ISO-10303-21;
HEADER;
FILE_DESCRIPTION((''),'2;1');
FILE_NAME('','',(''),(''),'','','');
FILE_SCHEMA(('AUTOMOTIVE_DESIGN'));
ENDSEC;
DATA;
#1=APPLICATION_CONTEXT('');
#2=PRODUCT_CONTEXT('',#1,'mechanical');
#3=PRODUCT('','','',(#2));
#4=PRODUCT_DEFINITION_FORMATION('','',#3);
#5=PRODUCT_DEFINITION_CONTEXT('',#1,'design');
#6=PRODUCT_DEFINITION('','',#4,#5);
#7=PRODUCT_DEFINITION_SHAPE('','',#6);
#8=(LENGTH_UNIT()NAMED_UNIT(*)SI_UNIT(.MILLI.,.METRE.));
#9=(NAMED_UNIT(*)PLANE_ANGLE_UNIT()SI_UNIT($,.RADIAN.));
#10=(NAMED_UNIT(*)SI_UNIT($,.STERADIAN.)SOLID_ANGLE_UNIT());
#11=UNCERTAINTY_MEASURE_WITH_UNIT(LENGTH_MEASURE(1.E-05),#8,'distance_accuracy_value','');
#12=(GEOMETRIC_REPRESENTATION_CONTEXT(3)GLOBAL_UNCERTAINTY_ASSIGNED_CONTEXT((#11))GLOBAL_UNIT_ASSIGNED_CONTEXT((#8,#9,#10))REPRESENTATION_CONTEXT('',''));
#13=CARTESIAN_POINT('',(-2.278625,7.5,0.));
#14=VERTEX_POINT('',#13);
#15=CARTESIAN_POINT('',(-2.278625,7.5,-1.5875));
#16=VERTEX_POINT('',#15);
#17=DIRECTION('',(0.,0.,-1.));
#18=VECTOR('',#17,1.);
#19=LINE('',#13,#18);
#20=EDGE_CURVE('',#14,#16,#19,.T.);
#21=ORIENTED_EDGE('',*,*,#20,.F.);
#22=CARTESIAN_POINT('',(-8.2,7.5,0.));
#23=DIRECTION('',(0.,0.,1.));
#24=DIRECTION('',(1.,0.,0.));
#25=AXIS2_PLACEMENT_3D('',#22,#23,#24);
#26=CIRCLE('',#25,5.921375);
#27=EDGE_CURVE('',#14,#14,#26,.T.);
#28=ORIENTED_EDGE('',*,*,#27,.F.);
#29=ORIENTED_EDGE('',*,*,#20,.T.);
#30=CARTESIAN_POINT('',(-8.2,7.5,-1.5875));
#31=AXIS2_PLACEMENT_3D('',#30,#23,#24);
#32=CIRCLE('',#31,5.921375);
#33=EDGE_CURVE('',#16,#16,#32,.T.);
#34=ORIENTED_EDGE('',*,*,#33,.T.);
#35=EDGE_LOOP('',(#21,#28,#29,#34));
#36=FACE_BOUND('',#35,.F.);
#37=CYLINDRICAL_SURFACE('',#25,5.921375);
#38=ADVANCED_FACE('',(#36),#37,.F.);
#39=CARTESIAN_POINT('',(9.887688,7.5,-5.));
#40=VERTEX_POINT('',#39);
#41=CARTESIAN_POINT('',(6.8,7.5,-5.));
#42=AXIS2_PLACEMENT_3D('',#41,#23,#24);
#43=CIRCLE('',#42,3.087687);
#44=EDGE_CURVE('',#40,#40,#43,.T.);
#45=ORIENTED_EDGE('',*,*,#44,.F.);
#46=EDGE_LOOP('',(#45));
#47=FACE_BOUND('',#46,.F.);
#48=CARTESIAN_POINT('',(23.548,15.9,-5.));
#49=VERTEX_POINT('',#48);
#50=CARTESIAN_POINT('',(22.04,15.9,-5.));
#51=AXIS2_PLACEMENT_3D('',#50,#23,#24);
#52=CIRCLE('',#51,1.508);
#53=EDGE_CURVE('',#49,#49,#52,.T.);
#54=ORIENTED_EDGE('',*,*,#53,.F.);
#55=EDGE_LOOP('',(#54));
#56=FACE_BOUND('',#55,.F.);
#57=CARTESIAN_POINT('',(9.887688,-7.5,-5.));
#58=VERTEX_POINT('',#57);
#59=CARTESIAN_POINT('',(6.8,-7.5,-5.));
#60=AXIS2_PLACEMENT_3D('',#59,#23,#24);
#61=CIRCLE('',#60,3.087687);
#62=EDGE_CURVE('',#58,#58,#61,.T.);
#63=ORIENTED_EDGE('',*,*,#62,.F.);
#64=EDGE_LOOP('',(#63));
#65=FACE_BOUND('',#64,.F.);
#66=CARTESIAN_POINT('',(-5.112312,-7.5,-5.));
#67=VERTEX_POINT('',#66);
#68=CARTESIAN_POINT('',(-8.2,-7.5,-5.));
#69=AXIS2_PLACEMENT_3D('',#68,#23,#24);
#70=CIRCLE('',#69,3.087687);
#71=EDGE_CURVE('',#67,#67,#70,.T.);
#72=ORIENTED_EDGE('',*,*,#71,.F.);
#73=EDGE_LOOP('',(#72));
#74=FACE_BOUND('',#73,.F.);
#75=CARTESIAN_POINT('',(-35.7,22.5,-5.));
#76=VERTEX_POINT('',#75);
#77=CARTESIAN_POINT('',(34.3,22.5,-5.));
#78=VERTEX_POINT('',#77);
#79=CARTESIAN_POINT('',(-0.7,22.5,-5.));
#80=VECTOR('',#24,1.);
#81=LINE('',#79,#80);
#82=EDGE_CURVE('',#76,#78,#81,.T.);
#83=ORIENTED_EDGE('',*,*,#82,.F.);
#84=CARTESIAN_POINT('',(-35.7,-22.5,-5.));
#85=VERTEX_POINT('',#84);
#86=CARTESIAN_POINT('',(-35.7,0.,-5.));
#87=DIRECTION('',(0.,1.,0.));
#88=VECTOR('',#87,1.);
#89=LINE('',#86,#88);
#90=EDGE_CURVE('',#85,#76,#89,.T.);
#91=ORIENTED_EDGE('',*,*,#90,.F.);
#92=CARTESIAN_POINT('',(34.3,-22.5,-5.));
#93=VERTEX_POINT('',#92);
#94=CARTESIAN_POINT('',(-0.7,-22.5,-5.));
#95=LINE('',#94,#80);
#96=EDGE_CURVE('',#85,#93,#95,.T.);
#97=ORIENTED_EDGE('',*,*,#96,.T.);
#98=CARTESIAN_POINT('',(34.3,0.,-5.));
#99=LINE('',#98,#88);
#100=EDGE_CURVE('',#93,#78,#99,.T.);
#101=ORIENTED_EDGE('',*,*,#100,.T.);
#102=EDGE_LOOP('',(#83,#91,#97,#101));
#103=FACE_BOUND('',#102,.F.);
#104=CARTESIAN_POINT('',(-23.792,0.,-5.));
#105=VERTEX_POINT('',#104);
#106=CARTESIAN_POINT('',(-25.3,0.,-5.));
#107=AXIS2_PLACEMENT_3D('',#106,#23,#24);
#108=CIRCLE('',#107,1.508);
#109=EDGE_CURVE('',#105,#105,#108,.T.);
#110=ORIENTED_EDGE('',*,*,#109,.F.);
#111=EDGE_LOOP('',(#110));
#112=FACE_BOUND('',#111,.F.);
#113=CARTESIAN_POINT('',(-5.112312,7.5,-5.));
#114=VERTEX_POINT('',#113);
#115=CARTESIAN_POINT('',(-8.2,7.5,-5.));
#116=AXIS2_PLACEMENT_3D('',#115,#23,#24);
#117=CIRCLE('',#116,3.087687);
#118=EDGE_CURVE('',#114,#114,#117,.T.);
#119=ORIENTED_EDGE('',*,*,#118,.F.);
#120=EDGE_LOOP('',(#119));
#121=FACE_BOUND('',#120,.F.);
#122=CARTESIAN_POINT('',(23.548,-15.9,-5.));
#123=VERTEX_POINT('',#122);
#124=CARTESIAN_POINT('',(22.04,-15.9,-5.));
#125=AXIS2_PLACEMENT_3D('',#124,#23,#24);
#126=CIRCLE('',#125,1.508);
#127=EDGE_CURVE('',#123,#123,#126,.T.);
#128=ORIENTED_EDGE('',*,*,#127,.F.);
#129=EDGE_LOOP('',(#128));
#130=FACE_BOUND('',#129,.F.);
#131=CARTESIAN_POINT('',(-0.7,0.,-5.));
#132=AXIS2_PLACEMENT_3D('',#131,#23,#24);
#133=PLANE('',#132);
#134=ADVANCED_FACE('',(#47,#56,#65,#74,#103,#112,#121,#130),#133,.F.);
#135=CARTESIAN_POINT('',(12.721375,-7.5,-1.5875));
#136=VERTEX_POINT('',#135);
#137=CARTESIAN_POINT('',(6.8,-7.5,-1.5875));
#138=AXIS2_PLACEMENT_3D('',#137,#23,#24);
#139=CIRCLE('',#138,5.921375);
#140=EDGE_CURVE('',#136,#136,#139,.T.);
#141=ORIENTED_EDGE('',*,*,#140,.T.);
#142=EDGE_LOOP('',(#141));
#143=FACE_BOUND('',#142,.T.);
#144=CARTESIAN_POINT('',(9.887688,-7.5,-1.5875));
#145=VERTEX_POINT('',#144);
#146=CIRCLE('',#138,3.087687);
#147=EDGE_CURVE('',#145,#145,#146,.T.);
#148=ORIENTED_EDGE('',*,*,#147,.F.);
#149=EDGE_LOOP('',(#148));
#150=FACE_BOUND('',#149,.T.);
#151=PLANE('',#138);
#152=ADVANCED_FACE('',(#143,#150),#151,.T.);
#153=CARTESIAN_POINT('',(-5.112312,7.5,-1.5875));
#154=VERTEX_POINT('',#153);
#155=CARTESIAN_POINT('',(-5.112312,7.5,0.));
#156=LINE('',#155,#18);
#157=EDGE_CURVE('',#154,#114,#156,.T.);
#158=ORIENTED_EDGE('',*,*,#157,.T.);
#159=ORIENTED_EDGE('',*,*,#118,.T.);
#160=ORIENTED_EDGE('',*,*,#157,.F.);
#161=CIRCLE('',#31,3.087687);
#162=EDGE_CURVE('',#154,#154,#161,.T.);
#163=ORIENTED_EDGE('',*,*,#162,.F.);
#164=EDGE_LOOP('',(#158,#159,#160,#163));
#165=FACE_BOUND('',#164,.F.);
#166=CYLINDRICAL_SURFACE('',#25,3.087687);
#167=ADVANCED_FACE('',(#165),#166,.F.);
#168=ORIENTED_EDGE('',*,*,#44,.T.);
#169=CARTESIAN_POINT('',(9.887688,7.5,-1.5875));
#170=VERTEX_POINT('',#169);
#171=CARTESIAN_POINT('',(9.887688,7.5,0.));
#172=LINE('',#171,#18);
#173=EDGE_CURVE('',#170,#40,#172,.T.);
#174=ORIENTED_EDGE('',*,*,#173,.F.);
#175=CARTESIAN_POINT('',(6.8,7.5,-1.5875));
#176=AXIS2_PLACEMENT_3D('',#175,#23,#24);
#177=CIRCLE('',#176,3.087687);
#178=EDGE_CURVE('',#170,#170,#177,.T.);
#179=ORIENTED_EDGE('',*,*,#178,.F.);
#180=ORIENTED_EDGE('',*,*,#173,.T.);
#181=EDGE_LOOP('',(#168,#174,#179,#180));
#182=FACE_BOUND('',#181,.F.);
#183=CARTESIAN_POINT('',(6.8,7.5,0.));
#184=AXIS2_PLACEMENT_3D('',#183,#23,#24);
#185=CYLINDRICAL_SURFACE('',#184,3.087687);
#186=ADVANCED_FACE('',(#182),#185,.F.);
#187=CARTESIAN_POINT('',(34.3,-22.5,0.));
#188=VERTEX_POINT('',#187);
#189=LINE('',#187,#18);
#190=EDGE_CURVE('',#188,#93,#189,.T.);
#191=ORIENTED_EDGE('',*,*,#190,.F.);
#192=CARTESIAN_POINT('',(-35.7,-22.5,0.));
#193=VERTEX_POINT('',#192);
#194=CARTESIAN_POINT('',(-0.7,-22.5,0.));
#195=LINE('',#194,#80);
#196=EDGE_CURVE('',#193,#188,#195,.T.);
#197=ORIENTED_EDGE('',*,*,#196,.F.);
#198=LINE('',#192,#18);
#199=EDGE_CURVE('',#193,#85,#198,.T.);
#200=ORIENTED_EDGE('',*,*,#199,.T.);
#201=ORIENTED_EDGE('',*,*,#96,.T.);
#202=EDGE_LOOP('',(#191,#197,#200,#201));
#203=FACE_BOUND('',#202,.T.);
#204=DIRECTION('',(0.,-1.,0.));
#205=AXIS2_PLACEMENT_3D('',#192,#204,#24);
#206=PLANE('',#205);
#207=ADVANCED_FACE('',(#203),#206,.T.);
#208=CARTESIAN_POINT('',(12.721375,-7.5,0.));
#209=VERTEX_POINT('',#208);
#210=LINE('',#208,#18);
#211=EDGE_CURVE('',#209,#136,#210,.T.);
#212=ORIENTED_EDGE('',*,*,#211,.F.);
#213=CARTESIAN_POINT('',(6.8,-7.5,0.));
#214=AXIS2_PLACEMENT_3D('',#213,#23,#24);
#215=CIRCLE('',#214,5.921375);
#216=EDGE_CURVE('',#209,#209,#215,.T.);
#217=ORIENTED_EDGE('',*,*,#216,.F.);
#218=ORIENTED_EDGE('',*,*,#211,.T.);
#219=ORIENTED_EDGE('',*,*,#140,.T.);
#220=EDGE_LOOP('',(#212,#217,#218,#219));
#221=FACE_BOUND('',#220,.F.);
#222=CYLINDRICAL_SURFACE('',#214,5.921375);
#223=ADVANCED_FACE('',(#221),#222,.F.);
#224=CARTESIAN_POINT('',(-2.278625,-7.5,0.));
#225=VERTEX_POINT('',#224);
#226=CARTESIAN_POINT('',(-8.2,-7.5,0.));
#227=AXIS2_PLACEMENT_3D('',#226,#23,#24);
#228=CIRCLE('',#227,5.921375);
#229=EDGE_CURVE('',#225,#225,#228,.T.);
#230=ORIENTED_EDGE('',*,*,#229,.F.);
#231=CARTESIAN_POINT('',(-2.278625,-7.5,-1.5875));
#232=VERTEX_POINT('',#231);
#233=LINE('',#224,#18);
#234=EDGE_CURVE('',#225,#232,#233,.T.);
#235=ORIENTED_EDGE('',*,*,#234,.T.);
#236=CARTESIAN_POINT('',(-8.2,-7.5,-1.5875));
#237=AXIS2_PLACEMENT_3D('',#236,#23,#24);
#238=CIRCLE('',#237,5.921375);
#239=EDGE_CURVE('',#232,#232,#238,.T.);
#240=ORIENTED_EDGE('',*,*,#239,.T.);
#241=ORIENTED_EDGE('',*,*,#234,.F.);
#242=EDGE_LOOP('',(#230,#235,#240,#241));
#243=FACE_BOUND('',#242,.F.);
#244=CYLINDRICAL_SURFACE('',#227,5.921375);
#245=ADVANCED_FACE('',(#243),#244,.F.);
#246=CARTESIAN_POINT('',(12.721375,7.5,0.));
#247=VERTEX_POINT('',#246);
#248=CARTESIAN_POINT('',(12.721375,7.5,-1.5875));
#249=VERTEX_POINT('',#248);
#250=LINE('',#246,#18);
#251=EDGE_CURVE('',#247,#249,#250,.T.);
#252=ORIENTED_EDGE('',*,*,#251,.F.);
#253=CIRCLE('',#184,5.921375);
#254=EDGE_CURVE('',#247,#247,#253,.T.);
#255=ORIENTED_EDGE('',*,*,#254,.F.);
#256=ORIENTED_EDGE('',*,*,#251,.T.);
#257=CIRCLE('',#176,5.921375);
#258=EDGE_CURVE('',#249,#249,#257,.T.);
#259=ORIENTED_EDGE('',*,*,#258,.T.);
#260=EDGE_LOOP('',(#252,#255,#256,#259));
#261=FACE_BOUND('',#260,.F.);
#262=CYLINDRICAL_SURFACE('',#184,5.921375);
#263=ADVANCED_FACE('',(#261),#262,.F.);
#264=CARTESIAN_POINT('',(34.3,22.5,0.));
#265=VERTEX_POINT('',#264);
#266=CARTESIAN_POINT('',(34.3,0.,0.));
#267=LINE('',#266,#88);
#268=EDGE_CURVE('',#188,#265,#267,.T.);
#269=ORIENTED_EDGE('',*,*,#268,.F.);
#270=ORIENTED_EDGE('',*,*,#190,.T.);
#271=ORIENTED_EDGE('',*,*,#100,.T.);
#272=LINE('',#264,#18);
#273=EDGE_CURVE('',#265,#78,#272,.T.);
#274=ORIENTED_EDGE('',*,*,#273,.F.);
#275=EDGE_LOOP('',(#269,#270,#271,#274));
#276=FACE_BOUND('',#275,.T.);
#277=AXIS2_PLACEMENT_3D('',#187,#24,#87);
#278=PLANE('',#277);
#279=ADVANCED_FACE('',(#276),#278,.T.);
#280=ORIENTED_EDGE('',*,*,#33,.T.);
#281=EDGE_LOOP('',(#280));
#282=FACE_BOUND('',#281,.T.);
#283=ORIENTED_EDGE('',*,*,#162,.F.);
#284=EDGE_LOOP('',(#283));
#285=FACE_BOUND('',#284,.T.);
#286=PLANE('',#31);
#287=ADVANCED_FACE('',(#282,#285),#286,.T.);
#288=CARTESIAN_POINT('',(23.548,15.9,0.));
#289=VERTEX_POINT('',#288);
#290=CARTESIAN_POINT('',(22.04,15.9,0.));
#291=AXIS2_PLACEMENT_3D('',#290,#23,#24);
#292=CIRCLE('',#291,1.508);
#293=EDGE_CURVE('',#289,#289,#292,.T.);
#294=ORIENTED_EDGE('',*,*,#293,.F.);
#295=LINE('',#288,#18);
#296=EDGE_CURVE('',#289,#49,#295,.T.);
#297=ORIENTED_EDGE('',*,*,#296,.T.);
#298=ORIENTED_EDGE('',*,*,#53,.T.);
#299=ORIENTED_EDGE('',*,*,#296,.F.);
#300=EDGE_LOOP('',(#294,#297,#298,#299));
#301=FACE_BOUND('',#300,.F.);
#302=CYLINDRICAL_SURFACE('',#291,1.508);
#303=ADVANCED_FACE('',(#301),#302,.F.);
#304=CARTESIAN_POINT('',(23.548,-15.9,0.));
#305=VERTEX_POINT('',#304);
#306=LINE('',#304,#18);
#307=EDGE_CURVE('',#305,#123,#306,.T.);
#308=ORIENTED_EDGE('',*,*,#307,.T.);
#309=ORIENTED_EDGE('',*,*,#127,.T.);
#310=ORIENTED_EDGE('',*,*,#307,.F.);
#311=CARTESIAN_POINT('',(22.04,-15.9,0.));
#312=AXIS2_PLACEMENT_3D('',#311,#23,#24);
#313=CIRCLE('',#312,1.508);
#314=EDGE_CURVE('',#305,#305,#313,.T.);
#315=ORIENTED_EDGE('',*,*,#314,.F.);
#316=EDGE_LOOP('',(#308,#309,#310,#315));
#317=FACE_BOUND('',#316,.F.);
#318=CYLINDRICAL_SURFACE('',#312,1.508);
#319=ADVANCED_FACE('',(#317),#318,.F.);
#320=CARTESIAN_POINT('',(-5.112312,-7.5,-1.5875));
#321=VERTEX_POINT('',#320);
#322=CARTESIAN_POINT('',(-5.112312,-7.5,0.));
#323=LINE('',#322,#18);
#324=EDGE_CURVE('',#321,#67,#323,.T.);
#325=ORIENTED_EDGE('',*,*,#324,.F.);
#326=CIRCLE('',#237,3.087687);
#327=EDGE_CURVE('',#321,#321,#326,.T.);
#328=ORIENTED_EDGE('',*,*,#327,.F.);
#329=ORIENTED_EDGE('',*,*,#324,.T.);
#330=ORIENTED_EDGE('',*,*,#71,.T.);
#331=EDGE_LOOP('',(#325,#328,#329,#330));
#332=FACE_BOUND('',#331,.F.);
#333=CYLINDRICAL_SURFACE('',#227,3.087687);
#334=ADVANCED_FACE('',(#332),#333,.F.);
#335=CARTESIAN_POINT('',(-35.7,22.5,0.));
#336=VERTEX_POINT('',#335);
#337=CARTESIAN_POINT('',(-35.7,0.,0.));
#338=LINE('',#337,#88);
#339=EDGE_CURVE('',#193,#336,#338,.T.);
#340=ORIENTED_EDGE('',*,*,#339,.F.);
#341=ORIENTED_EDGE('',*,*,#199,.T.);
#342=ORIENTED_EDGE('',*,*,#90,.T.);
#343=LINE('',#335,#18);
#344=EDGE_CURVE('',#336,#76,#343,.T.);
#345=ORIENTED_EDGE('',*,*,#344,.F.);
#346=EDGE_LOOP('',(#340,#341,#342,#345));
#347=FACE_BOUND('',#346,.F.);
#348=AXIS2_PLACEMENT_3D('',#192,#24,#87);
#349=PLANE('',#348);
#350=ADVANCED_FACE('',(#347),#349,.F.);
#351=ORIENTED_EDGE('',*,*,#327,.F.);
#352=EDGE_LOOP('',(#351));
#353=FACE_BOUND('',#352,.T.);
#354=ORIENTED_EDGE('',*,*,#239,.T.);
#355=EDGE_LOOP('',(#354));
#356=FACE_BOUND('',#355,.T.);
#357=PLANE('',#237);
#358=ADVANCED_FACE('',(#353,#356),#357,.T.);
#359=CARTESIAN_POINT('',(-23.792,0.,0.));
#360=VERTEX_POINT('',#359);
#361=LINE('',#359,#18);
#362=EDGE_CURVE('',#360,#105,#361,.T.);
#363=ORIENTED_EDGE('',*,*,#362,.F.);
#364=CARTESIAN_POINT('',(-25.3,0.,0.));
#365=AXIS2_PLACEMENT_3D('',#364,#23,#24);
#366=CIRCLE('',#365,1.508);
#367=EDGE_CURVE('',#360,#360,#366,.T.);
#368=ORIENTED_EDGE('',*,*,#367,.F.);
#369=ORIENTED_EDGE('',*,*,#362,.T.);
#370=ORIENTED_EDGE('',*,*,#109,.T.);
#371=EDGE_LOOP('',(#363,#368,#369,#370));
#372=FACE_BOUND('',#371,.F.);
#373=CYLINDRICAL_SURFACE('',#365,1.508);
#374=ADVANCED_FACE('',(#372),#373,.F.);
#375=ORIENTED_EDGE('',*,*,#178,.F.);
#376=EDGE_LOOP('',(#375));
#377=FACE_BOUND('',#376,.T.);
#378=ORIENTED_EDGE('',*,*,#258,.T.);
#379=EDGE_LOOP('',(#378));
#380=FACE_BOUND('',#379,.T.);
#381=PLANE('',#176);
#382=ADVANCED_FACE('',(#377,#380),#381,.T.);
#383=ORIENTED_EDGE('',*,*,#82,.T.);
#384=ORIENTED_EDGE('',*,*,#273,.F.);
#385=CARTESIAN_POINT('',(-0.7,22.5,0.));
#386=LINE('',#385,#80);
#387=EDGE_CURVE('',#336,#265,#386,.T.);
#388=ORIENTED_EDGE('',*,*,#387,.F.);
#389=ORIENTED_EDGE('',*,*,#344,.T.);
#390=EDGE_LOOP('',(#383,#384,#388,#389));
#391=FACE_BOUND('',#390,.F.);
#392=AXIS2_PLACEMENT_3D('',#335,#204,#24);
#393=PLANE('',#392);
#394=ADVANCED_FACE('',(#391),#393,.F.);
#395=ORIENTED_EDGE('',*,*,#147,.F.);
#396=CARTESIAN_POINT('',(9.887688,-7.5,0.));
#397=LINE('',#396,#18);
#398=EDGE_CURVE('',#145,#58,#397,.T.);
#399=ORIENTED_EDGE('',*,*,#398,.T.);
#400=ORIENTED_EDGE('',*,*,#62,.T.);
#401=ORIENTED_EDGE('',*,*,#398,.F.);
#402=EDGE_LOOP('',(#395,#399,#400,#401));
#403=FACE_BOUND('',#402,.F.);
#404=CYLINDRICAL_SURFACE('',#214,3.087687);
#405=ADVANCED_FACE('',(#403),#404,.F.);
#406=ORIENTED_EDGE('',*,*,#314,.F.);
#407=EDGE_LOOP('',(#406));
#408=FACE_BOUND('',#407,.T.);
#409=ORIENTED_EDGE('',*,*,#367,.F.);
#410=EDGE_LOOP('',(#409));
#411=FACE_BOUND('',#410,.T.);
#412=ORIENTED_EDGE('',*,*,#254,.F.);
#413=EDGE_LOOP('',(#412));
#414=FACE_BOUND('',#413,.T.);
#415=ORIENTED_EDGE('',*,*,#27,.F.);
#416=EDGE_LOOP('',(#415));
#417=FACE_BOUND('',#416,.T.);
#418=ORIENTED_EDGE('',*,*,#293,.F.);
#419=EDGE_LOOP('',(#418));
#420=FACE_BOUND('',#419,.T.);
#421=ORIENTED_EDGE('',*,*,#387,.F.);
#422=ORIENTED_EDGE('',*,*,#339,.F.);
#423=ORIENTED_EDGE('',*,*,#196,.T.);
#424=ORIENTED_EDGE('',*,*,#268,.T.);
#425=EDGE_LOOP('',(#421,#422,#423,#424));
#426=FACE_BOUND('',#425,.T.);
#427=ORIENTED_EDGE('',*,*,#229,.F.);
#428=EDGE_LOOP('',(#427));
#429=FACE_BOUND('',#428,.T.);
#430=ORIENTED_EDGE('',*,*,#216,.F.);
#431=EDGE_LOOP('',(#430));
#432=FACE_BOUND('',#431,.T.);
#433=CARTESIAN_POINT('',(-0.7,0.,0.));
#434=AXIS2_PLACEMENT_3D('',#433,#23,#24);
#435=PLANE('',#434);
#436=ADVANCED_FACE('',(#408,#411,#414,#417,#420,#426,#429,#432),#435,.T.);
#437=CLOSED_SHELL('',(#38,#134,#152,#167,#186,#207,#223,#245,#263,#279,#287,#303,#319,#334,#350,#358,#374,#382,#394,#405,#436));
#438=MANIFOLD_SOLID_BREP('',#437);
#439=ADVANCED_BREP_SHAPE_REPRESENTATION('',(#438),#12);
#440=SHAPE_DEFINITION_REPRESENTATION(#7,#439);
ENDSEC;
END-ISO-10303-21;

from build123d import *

# Parameters (mm, degrees)
F1_W     = 70
F1_H     = 45
F2_DEPTH = 5
F3_R     = 1.508
F4_DEPTH = 25
F5_R     = 3.0876875
F6_DEPTH = 25
F7_R     = 5.921375
F8_DEPTH = 1.5875


# Not quite as in the source:
# - a length typed as a fraction of an inch, garbled in the dataset ("3 / 203.2 mm" for 3/8 in), is restored


with BuildPart() as f2:
    # F1 (on Top) → F2 (new body)
    with BuildSketch(Plane.XY):
        with Locations((-0.7, 0)):
            Rectangle(F1_W, F1_H)
    extrude(amount=-F2_DEPTH)

    # F3 (on Top) → F4 (cut)
    with BuildSketch(Plane.XY):
        with Locations((-25.3, 0)):
            Circle(F3_R)
        with Locations((22.04, 15.9)):
            Circle(F3_R)
        with Locations((22.04, -15.9)):
            Circle(F3_R)
    extrude(amount=-F4_DEPTH, mode=Mode.SUBTRACT)

    # F5 (on Top) → F6 (cut)
    with BuildSketch(Plane.XY):
        with Locations((-8.2, 7.5)):
            Circle(F5_R)
        with Locations((6.8, 7.5)):
            Circle(F5_R)
        with Locations((-8.2, -7.5)):
            Circle(F5_R)
        with Locations((6.8, -7.5)):
            Circle(F5_R)
    extrude(amount=-F6_DEPTH, mode=Mode.SUBTRACT)

    # F7 (on face) → F8 (cut)
    with BuildSketch(Plane.XY):
        with Locations((-8.2, 7.5)):
            Circle(F7_R)
        with Locations((6.8, 7.5)):
            Circle(F7_R)
        with Locations((-8.2, -7.5)):
            Circle(F7_R)
        with Locations((6.8, -7.5)):
            Circle(F7_R)
    extrude(amount=-F8_DEPTH, mode=Mode.SUBTRACT)


solid = f2.part
